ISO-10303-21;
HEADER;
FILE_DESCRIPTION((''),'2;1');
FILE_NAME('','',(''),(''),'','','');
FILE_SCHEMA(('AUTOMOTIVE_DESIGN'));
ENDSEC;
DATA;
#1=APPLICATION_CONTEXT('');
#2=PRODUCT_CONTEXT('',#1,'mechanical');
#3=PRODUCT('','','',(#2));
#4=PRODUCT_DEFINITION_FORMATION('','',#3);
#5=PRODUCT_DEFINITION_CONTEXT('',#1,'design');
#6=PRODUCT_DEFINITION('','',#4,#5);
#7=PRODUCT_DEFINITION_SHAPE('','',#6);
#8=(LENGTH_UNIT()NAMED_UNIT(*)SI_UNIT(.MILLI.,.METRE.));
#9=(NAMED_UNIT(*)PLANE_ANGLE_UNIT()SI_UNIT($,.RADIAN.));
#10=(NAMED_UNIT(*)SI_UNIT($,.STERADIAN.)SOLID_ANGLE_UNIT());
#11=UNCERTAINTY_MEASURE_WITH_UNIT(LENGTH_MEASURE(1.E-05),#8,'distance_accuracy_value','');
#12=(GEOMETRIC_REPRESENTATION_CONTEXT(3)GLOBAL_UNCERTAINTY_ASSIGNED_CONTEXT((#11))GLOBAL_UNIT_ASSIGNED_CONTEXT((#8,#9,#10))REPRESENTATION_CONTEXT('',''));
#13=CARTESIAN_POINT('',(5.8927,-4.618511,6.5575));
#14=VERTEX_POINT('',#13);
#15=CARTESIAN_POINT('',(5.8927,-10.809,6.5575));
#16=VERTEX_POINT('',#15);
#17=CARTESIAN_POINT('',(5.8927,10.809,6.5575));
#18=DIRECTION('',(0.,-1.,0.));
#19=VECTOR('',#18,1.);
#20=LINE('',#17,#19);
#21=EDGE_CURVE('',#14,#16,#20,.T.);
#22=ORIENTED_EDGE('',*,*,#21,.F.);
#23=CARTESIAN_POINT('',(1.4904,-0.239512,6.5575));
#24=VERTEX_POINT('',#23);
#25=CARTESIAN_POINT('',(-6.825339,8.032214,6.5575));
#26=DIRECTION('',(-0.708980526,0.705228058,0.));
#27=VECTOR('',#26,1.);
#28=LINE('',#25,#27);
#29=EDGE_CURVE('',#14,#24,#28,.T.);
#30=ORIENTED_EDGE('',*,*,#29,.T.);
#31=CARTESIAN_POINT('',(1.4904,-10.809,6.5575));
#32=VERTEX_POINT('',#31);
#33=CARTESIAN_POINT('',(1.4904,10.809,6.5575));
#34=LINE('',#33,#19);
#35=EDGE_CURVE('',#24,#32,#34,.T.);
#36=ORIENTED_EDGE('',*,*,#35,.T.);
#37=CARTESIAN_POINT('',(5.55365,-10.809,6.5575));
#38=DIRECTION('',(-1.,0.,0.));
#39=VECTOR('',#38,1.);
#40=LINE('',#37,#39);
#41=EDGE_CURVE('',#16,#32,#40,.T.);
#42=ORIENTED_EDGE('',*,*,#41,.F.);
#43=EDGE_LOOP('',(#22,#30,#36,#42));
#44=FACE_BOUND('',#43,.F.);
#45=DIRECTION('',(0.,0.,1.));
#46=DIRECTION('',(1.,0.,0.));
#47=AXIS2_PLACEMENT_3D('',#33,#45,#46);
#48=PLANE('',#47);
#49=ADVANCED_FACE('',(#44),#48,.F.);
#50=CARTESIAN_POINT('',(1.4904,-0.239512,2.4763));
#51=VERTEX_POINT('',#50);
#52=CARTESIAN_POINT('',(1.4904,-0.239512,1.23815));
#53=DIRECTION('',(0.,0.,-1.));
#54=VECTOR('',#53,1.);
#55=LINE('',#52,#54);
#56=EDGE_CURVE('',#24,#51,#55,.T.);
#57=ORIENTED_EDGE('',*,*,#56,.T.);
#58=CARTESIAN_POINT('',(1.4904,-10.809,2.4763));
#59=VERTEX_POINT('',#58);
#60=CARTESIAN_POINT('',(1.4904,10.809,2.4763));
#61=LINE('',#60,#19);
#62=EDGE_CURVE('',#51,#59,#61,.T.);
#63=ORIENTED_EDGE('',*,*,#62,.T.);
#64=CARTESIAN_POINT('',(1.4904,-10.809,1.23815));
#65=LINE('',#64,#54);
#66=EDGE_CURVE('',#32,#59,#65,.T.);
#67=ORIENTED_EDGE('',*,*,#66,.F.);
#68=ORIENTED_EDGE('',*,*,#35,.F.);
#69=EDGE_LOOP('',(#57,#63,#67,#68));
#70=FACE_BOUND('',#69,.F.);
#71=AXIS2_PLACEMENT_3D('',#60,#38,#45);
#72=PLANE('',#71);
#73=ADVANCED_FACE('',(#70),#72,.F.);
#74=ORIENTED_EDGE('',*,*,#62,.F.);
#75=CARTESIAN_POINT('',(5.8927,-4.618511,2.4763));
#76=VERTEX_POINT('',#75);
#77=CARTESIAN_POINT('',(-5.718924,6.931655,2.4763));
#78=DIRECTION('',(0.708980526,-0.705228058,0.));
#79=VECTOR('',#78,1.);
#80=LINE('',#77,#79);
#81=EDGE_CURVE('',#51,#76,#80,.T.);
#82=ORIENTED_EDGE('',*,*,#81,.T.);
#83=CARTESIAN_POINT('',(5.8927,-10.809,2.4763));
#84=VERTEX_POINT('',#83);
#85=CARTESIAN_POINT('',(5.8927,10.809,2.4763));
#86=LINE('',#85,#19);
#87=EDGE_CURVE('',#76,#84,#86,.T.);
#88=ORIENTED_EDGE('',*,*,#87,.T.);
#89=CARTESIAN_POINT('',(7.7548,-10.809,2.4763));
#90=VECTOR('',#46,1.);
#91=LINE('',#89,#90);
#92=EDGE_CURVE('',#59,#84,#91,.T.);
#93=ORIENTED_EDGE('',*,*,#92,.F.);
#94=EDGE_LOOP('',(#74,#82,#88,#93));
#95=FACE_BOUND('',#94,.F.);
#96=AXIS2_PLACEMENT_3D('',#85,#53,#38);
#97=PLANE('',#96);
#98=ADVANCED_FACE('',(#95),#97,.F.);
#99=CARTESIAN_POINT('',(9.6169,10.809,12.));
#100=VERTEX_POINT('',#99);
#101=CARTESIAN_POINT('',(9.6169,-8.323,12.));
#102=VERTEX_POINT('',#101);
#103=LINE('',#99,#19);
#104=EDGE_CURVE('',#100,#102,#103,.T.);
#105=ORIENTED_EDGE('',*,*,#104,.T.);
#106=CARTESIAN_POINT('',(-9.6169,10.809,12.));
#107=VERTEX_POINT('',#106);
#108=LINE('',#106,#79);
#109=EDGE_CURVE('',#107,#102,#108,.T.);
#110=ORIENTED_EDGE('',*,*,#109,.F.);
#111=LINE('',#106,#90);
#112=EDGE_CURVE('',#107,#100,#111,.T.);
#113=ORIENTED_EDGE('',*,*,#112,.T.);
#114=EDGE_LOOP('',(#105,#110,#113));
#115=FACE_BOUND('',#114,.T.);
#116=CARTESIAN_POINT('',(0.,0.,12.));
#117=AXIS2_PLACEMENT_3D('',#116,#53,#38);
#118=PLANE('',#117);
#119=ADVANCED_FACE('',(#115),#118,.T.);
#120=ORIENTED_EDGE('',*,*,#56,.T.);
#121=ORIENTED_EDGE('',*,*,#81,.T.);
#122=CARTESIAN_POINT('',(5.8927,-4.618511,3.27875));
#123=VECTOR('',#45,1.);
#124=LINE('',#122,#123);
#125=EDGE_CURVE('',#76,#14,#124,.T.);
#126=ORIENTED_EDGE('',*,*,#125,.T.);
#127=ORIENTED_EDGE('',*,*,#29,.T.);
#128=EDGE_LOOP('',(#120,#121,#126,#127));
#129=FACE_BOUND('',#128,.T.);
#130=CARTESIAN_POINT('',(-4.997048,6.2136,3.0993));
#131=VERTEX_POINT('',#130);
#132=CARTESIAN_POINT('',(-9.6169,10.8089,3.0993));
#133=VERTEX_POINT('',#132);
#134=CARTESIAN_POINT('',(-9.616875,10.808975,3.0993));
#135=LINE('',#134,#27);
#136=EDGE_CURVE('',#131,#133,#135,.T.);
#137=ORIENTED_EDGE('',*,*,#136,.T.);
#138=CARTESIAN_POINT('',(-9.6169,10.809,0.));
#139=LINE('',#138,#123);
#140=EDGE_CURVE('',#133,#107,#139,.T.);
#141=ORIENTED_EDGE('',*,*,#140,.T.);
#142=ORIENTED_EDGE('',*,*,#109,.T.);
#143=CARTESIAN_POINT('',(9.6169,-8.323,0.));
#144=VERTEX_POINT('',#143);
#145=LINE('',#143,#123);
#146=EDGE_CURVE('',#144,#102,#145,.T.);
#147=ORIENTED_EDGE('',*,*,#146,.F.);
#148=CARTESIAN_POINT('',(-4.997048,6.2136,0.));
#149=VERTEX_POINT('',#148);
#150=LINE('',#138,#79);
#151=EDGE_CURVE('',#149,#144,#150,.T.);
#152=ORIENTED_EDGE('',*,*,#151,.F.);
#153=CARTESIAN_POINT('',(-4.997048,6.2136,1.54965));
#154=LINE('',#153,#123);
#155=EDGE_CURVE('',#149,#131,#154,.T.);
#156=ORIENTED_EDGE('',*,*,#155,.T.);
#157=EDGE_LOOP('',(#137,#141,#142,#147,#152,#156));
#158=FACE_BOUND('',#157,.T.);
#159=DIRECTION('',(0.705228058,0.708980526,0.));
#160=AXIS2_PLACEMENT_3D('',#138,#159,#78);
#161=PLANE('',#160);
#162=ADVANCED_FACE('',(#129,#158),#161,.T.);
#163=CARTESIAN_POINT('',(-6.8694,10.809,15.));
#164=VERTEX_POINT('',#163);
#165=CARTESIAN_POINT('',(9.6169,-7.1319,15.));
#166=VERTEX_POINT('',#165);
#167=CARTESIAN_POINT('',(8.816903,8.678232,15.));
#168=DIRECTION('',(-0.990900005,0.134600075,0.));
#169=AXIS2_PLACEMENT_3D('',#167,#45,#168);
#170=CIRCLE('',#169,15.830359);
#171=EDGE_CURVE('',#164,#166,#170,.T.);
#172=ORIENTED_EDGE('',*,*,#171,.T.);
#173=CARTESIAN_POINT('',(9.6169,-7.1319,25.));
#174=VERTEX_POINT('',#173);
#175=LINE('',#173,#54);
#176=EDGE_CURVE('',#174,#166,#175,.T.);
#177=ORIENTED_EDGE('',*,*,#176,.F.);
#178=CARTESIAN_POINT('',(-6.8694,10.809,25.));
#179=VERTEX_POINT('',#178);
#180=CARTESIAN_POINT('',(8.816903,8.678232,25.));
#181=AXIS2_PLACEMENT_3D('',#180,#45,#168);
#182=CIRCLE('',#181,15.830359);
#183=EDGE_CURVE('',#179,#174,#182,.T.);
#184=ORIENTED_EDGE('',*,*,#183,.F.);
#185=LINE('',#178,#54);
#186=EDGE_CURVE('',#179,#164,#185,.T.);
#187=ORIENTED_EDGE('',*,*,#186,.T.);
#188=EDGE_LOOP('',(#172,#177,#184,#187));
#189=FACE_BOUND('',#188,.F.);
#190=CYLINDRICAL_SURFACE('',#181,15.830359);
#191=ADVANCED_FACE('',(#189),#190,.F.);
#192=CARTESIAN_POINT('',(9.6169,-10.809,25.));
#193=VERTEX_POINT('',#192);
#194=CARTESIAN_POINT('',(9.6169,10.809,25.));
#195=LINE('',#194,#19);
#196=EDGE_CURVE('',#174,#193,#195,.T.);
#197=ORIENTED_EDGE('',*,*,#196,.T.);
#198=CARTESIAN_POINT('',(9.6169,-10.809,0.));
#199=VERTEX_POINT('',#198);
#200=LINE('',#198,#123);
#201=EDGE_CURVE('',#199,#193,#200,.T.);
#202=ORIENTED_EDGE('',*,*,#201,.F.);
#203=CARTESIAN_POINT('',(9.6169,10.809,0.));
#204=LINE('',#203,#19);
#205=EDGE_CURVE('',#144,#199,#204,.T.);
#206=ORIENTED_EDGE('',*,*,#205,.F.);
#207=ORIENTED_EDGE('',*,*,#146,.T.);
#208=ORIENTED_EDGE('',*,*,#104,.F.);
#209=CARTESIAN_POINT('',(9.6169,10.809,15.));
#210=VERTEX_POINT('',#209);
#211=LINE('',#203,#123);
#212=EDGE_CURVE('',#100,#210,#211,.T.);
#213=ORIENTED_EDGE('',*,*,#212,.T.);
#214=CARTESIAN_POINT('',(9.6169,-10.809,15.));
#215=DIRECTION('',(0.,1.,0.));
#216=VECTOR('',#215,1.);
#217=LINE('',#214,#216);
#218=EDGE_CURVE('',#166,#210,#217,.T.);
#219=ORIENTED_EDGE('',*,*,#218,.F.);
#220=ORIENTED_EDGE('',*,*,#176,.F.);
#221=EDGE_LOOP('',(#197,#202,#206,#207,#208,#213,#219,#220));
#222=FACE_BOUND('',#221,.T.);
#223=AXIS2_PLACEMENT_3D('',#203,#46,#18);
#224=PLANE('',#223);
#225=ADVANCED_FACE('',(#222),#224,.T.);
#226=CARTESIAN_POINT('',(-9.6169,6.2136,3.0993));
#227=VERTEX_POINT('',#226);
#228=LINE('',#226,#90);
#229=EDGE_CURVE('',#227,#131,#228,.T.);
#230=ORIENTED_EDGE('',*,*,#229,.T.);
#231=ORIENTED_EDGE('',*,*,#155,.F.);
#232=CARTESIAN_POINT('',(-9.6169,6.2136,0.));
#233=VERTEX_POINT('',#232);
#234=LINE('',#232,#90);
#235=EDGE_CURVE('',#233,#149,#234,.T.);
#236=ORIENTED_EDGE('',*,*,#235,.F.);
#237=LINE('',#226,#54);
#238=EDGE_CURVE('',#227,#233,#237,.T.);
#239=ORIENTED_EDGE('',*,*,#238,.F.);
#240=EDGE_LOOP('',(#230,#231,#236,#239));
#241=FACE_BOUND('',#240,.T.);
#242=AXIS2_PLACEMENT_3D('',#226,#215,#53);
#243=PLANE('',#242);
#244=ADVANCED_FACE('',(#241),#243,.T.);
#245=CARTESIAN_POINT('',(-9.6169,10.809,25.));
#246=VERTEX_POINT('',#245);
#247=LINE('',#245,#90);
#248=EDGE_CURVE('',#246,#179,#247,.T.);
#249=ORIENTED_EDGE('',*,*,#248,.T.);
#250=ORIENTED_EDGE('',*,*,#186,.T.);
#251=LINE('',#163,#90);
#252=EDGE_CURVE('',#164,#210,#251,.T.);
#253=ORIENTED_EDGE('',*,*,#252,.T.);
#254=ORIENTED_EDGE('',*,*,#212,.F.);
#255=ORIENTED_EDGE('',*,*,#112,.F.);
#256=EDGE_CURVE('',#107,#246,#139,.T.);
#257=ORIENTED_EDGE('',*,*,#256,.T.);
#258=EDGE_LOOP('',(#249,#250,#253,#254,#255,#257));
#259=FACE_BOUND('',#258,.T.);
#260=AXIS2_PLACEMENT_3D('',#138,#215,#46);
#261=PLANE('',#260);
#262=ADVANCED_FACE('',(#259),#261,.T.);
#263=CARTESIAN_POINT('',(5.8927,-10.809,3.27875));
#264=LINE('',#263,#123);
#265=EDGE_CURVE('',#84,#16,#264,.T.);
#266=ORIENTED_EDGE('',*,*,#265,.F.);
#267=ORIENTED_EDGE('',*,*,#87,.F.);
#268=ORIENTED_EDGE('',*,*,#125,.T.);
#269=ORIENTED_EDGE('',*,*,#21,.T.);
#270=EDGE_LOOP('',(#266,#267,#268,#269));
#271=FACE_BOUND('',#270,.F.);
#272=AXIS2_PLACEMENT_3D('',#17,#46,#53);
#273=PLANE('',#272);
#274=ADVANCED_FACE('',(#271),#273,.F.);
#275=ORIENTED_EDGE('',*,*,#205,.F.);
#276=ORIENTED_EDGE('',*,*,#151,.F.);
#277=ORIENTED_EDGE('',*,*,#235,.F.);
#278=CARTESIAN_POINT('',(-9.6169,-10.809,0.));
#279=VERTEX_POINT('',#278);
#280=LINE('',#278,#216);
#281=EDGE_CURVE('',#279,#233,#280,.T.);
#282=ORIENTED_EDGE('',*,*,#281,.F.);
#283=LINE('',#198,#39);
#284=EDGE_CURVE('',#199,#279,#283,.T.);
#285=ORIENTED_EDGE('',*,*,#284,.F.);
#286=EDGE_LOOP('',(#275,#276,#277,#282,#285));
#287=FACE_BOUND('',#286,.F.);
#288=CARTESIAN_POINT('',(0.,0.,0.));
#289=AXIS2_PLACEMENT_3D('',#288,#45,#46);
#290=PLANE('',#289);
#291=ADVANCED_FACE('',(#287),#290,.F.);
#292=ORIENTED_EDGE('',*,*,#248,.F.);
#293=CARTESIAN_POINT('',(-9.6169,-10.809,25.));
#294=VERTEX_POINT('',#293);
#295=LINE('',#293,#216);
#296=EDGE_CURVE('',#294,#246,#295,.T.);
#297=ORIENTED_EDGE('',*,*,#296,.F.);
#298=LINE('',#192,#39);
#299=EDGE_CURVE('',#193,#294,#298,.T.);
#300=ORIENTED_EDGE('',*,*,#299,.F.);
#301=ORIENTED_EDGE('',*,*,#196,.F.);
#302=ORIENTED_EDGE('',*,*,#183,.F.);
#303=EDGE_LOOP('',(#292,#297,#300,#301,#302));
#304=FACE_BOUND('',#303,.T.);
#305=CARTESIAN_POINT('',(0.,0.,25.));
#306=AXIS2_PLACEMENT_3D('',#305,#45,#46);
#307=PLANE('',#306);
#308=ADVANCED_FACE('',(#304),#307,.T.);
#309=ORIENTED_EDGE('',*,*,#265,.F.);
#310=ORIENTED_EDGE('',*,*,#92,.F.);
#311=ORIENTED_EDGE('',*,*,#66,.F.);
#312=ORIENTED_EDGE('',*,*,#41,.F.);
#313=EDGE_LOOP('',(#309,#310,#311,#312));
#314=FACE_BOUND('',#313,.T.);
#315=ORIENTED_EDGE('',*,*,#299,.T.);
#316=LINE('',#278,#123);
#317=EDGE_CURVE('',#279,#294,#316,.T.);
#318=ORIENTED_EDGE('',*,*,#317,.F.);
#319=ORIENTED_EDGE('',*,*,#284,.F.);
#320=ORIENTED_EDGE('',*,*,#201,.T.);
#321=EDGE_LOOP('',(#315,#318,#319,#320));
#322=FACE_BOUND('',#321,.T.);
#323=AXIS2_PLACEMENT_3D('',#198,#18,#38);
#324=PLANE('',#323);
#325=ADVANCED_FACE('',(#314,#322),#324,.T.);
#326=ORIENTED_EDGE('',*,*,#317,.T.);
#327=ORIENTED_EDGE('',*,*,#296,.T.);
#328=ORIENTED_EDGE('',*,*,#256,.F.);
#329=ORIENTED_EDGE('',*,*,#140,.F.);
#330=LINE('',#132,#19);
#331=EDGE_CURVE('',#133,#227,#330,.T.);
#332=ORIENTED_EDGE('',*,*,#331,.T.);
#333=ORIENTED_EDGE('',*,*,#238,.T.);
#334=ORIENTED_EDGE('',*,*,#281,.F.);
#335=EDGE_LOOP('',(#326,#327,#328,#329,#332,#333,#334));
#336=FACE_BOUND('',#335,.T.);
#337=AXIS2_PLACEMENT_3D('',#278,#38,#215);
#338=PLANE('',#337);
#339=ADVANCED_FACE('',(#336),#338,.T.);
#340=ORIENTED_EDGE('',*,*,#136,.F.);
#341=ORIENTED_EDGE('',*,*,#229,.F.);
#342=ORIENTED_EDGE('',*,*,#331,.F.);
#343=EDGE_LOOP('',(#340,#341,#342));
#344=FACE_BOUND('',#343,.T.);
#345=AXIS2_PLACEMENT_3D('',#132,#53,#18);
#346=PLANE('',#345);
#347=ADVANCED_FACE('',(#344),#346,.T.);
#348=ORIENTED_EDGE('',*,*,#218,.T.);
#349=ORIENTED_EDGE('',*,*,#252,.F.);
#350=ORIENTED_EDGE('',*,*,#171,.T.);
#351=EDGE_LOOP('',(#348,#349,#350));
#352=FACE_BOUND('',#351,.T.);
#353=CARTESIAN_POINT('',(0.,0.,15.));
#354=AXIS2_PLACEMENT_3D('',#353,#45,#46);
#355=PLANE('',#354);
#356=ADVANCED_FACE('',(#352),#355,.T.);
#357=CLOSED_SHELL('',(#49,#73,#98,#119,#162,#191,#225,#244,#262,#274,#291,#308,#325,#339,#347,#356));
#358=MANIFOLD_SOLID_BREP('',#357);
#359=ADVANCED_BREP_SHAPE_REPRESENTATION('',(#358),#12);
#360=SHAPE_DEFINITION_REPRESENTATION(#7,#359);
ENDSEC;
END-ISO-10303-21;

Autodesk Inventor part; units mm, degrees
ref_plane "YZ Plane" through (0, 0, 0) normal (1, 0, 0) x (0, 1, 0)
ref_plane "XZ Plane" through (0, 0, 0) normal (0, 1, 0) x (-1, 0, 0)
ref_plane "XY Plane" through (0, 0, 0) normal (0, 0, 1) x (1, 0, 0)
sketch "스케치1" plane through (0, 0, 0) normal (0, 0, 1) x (1, 0, 0)
  line L0 (9.6169, -10.809) -> (-9.6169, -10.809)
  line L1 (-9.6169, -10.809) -> (-9.6169, 10.809)
  line L2 (-9.6169, 10.809) -> (9.6169, 10.809)
  line L3 (9.6169, 10.809) -> (9.6169, -10.809)
  line L4 (9.6169, -10.809) -> (-9.6169, 10.809) construction
  line L5 (-9.6169, -10.809) -> (9.6169, 10.809) construction
  point P0 (0, 0)
extrude "돌출1" add sketch "스케치1" along normal blind 25
sketch "스케치2" plane through (-9.6169, 10.809, 0) normal (0, 1, 0) x (1, 0, 0)
  point P0 (9.6169, 0)
sketch "스케치3" plane through (0, 0, 25) normal (0, 0, 1) x (1, 0, 0)
  line L0 (9.6169, -10.809) -> (9.6169, 10.809) projected
  arc A0 (-6.8694, 10.809) -> (9.6169, -7.1319) centre (8.8168, 8.6782) ccw
  line L1 (-6.8694, 10.809) -> (9.6169, 10.809)
  point P0 (0, 0)
extrude "돌출2" cut sketch "스케치3" against normal blind 10
sketch "스케치4" plane through (0, 0, 0) normal (0, 0, -1) x (-1, 0, 0)
  line L0 (9.6169, 10.809) -> (9.6169, -10.809) projected
  line L1 (9.6169, 10.809) -> (-9.6169, -8.323)
  line L2 (-9.6169, 10.809) -> (-9.6169, -10.809) projected
  line L3 (-9.6169, -8.323) -> (-9.6169, 10.809)
  line L4 (9.6169, 10.809) -> (-9.6169, 10.809) projected
  line L5 (9.6169, 10.809) -> (-9.6169, 10.809)
  point P0 (0, 0)
sketch "스케치5" plane through (-9.6169, 10.809, 0) normal (0, 1, 0) x (1, 0, 0)
  line L0 (11.1073, -6.5575) -> (15.5096, -6.5575)
  line L1 (15.5096, -6.5575) -> (15.5096, -2.4763)
  line L2 (15.5096, -2.4763) -> (11.1073, -2.4763)
  line L3 (11.1073, -2.4763) -> (11.1073, -6.5575)
  line L4 (0, 0) -> (19.2339, 0) projected
  line L5 (0.0558, -2.4763) -> (5.1459, -2.4763)
  line L6 (5.1459, -2.4763) -> (5.1459, 0)
  line L7 (5.1459, 0) -> (0.0558, 0)
  line L8 (0.0558, 0) -> (0.0558, -2.4763)
  point P0 (9.6169, 0)
extrude "돌출3" cut sketch "스케치5" against normal blind 50 contours L3 L2 L1 L0
extrude "돌출4" cut sketch "스케치4" against normal blind 12
sketch "스케치6" plane through (-9.6169, -10.809, 25) normal (-1, 0, 0) x (0, 0, 1)
  line L0 (-25, 21.6179) -> (-13, 21.6179) projected
  line L1 (-25, 21.6179) -> (-21.9007, 21.6179)
  line L2 (-21.9007, 21.6179) -> (-21.9007, 17.0226)
  line L3 (-21.9007, 17.0226) -> (-25, 17.0226)
  line L4 (-25, 17.0226) -> (-25, 21.6179)
  point P0 (-25, 10.809)
extrude "돌출5" cut sketch "스케치6" against normal blind 12
properties part number "240510_3Dsketch08"
